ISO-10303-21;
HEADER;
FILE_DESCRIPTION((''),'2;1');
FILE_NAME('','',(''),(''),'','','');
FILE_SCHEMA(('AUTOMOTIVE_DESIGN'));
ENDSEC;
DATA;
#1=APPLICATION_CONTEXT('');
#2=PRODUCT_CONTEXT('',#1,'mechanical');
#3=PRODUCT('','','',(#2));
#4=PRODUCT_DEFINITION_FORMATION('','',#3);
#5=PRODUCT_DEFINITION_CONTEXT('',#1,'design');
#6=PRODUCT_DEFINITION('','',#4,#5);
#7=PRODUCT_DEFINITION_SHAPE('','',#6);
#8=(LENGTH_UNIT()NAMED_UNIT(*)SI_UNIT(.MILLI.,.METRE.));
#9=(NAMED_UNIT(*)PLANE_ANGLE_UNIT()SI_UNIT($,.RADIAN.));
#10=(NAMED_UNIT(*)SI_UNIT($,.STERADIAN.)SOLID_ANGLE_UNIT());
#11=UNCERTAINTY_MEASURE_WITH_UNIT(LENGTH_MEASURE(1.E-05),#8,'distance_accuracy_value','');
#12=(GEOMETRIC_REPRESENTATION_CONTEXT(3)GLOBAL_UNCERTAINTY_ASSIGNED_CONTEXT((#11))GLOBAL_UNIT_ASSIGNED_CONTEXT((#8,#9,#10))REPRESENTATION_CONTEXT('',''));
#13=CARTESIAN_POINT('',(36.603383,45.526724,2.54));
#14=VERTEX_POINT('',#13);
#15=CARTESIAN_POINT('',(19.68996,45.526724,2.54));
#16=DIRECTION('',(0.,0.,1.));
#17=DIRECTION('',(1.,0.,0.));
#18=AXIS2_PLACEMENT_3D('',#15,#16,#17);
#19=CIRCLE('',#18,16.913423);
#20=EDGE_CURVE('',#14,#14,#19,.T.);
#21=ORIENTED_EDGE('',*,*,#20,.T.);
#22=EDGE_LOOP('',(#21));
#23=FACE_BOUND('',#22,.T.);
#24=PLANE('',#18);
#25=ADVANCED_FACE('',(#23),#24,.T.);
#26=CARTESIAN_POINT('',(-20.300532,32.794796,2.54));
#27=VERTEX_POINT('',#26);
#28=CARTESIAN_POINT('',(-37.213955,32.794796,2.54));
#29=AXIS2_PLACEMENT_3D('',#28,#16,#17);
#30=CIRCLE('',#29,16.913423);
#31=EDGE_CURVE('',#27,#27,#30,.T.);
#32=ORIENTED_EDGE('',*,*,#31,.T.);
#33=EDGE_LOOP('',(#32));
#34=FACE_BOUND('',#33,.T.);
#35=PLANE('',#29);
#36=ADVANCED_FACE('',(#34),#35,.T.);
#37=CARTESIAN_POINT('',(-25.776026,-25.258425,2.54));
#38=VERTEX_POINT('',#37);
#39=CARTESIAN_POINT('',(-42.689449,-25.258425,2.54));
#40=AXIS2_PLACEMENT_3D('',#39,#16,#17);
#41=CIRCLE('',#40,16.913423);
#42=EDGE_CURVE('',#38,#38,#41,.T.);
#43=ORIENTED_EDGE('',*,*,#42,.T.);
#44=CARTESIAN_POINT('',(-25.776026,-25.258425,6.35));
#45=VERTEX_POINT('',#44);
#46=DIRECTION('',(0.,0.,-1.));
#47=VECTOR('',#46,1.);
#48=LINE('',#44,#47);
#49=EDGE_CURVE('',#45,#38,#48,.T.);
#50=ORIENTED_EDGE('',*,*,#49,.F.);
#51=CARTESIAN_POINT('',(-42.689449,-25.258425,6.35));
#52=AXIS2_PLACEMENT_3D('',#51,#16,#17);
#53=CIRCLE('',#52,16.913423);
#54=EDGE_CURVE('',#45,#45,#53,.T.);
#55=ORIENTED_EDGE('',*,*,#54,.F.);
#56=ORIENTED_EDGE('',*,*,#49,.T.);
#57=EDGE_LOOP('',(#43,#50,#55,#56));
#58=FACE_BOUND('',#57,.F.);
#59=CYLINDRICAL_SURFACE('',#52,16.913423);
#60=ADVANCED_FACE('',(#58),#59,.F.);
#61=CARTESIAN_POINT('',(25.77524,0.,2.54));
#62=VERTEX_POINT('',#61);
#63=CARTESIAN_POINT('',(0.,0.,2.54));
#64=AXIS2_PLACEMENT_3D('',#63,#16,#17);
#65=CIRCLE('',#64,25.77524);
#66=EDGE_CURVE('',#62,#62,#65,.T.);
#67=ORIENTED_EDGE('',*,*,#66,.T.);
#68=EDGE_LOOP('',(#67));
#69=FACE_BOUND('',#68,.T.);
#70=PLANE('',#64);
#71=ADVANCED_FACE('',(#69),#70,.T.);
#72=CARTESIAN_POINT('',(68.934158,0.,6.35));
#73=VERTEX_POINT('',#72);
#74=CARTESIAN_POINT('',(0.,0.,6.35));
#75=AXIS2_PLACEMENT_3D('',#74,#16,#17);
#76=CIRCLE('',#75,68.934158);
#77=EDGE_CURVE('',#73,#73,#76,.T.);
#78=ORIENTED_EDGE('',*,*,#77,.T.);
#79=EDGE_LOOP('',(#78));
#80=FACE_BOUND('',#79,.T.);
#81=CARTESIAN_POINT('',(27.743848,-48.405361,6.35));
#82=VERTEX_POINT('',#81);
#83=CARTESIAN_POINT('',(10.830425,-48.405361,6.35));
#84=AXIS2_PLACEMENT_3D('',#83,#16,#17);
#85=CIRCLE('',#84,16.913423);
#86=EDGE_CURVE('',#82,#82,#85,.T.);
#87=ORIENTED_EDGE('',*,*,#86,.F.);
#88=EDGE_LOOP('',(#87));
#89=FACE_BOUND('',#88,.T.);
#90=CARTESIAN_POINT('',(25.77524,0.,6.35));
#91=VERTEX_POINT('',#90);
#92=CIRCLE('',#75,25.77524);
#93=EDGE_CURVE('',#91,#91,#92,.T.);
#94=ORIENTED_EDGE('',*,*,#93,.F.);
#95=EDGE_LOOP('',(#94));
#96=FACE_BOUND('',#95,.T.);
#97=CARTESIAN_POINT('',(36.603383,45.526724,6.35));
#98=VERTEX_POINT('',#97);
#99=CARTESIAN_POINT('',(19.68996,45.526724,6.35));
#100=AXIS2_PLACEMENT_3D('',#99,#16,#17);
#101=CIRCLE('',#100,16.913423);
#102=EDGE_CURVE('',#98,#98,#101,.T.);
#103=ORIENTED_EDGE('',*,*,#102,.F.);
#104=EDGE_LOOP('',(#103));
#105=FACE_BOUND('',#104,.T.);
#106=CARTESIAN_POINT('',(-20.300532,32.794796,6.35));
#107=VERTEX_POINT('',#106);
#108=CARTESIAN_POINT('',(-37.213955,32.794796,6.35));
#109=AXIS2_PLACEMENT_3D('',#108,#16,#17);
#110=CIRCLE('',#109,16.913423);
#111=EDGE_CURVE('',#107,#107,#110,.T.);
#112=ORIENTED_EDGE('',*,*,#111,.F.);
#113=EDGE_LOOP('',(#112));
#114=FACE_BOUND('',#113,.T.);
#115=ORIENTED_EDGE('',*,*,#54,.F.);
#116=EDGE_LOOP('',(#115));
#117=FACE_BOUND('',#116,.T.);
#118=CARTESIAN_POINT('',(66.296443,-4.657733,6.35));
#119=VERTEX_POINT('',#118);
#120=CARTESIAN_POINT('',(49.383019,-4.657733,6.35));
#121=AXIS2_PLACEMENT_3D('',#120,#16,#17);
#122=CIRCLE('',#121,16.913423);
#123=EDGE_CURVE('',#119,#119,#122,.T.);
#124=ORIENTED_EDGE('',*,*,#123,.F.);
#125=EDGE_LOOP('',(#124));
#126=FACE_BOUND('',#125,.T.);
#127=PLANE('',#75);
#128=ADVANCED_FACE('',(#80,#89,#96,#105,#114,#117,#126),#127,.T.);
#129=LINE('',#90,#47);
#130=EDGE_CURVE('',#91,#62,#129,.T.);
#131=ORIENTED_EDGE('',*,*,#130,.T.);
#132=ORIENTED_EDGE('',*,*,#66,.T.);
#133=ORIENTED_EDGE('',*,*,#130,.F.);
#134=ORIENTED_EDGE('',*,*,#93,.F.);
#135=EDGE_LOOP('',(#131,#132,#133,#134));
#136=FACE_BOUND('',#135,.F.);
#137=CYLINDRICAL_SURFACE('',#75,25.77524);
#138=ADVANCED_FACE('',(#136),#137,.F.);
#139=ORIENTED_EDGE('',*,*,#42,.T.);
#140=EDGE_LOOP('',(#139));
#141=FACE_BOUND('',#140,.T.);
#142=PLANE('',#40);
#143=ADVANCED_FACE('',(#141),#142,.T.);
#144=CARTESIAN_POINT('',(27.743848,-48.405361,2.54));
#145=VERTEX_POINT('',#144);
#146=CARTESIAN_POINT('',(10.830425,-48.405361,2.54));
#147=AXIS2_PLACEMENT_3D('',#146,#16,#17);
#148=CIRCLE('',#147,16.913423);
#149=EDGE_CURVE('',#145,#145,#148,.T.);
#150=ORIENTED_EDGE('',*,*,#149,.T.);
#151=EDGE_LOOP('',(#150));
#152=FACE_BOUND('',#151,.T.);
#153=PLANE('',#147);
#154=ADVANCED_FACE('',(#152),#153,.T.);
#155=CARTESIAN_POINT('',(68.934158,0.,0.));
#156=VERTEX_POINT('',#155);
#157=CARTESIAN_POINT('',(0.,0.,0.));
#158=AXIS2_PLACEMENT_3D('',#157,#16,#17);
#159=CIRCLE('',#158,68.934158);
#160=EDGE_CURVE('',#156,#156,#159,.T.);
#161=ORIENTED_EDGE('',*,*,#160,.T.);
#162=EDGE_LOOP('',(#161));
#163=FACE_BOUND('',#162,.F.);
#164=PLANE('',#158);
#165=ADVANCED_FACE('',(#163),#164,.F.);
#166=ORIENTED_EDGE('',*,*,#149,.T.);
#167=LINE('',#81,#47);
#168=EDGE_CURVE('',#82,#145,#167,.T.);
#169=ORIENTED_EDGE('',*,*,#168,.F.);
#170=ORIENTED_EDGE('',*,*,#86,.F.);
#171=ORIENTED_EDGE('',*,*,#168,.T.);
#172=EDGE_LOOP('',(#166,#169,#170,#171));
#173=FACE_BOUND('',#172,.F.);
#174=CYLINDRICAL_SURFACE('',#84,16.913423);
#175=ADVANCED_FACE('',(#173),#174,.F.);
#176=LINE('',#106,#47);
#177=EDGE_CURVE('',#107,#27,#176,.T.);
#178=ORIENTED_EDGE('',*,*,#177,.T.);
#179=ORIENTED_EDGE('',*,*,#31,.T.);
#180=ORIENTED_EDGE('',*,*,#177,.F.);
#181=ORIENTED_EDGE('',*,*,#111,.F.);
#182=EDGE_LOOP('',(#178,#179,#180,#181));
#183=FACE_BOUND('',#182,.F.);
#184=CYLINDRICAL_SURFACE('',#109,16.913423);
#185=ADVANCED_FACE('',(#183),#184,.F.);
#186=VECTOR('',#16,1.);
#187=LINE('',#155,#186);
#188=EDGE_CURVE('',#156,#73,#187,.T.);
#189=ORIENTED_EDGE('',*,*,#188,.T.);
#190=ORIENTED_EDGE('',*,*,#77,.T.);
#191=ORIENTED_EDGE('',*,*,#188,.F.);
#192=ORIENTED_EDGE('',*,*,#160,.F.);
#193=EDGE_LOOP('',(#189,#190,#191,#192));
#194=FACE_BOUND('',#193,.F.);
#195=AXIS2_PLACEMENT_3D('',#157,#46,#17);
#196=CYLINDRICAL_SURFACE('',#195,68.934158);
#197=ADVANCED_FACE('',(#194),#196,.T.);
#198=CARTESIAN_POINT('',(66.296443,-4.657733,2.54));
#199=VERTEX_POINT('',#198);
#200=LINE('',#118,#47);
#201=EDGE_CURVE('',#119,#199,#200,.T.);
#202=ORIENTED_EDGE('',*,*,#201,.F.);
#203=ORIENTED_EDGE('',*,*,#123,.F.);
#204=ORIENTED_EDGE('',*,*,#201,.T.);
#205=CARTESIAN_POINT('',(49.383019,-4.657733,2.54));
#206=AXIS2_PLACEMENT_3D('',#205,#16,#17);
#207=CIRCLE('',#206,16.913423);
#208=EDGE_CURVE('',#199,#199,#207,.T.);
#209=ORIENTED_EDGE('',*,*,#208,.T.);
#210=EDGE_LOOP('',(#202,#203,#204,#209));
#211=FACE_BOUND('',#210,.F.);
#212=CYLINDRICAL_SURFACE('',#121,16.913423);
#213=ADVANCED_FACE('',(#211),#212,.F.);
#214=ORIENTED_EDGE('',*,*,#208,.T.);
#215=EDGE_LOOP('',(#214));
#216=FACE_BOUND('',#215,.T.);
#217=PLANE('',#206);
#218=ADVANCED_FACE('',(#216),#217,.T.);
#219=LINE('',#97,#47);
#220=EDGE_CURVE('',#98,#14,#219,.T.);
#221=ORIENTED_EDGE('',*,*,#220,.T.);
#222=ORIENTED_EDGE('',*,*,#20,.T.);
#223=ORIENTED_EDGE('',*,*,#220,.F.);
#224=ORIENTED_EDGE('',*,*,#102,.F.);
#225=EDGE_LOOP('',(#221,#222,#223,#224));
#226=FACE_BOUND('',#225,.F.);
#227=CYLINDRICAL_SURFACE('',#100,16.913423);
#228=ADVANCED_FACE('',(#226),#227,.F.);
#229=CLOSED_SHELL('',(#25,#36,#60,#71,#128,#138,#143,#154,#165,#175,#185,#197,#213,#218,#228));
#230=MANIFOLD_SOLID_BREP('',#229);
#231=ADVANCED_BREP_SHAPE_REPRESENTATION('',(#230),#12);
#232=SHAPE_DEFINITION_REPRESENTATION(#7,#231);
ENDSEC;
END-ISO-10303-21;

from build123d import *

# Parameters (mm, degrees)
F0_R     = 68.9341581071
F1_DEPTH = 6.35
F2_R     = 25.775239711
F3_DEPTH = 3.81
F5_R     = 16.9134232358
F6_DEPTH = 3.81


# Not quite as in the source:
# - a feature names something its author has since deleted; it is built from what else it names


with BuildPart() as f1:
    # F0 (on Top) → F1 (new body)
    with BuildSketch(Plane.XY):
        Circle(F0_R)
    extrude(amount=F1_DEPTH)

    # F2 (on face) → F3 (cut)
    with BuildSketch(Plane.XY.offset(6.35)):
        Circle(F2_R)
    extrude(amount=-F3_DEPTH, mode=Mode.SUBTRACT)

    # F5 (on face) → F6 (cut)
    with BuildSketch(Plane.XY.offset(6.35)):
        with Locations((-42.6894489161, -25.2584252012)):
            Circle(F5_R)
        with Locations((-37.2139550745, 32.7947959304)):
            Circle(F5_R)
        with Locations((19.6899598242, 45.5267237403)):
            Circle(F5_R)
        with Locations((49.383019483, -4.6577332624)):
            Circle(F5_R)
        with Locations((10.8304246834, -48.405361207)):
            Circle(F5_R)
    extrude(amount=-F6_DEPTH, mode=Mode.SUBTRACT)


solid = f1.part
